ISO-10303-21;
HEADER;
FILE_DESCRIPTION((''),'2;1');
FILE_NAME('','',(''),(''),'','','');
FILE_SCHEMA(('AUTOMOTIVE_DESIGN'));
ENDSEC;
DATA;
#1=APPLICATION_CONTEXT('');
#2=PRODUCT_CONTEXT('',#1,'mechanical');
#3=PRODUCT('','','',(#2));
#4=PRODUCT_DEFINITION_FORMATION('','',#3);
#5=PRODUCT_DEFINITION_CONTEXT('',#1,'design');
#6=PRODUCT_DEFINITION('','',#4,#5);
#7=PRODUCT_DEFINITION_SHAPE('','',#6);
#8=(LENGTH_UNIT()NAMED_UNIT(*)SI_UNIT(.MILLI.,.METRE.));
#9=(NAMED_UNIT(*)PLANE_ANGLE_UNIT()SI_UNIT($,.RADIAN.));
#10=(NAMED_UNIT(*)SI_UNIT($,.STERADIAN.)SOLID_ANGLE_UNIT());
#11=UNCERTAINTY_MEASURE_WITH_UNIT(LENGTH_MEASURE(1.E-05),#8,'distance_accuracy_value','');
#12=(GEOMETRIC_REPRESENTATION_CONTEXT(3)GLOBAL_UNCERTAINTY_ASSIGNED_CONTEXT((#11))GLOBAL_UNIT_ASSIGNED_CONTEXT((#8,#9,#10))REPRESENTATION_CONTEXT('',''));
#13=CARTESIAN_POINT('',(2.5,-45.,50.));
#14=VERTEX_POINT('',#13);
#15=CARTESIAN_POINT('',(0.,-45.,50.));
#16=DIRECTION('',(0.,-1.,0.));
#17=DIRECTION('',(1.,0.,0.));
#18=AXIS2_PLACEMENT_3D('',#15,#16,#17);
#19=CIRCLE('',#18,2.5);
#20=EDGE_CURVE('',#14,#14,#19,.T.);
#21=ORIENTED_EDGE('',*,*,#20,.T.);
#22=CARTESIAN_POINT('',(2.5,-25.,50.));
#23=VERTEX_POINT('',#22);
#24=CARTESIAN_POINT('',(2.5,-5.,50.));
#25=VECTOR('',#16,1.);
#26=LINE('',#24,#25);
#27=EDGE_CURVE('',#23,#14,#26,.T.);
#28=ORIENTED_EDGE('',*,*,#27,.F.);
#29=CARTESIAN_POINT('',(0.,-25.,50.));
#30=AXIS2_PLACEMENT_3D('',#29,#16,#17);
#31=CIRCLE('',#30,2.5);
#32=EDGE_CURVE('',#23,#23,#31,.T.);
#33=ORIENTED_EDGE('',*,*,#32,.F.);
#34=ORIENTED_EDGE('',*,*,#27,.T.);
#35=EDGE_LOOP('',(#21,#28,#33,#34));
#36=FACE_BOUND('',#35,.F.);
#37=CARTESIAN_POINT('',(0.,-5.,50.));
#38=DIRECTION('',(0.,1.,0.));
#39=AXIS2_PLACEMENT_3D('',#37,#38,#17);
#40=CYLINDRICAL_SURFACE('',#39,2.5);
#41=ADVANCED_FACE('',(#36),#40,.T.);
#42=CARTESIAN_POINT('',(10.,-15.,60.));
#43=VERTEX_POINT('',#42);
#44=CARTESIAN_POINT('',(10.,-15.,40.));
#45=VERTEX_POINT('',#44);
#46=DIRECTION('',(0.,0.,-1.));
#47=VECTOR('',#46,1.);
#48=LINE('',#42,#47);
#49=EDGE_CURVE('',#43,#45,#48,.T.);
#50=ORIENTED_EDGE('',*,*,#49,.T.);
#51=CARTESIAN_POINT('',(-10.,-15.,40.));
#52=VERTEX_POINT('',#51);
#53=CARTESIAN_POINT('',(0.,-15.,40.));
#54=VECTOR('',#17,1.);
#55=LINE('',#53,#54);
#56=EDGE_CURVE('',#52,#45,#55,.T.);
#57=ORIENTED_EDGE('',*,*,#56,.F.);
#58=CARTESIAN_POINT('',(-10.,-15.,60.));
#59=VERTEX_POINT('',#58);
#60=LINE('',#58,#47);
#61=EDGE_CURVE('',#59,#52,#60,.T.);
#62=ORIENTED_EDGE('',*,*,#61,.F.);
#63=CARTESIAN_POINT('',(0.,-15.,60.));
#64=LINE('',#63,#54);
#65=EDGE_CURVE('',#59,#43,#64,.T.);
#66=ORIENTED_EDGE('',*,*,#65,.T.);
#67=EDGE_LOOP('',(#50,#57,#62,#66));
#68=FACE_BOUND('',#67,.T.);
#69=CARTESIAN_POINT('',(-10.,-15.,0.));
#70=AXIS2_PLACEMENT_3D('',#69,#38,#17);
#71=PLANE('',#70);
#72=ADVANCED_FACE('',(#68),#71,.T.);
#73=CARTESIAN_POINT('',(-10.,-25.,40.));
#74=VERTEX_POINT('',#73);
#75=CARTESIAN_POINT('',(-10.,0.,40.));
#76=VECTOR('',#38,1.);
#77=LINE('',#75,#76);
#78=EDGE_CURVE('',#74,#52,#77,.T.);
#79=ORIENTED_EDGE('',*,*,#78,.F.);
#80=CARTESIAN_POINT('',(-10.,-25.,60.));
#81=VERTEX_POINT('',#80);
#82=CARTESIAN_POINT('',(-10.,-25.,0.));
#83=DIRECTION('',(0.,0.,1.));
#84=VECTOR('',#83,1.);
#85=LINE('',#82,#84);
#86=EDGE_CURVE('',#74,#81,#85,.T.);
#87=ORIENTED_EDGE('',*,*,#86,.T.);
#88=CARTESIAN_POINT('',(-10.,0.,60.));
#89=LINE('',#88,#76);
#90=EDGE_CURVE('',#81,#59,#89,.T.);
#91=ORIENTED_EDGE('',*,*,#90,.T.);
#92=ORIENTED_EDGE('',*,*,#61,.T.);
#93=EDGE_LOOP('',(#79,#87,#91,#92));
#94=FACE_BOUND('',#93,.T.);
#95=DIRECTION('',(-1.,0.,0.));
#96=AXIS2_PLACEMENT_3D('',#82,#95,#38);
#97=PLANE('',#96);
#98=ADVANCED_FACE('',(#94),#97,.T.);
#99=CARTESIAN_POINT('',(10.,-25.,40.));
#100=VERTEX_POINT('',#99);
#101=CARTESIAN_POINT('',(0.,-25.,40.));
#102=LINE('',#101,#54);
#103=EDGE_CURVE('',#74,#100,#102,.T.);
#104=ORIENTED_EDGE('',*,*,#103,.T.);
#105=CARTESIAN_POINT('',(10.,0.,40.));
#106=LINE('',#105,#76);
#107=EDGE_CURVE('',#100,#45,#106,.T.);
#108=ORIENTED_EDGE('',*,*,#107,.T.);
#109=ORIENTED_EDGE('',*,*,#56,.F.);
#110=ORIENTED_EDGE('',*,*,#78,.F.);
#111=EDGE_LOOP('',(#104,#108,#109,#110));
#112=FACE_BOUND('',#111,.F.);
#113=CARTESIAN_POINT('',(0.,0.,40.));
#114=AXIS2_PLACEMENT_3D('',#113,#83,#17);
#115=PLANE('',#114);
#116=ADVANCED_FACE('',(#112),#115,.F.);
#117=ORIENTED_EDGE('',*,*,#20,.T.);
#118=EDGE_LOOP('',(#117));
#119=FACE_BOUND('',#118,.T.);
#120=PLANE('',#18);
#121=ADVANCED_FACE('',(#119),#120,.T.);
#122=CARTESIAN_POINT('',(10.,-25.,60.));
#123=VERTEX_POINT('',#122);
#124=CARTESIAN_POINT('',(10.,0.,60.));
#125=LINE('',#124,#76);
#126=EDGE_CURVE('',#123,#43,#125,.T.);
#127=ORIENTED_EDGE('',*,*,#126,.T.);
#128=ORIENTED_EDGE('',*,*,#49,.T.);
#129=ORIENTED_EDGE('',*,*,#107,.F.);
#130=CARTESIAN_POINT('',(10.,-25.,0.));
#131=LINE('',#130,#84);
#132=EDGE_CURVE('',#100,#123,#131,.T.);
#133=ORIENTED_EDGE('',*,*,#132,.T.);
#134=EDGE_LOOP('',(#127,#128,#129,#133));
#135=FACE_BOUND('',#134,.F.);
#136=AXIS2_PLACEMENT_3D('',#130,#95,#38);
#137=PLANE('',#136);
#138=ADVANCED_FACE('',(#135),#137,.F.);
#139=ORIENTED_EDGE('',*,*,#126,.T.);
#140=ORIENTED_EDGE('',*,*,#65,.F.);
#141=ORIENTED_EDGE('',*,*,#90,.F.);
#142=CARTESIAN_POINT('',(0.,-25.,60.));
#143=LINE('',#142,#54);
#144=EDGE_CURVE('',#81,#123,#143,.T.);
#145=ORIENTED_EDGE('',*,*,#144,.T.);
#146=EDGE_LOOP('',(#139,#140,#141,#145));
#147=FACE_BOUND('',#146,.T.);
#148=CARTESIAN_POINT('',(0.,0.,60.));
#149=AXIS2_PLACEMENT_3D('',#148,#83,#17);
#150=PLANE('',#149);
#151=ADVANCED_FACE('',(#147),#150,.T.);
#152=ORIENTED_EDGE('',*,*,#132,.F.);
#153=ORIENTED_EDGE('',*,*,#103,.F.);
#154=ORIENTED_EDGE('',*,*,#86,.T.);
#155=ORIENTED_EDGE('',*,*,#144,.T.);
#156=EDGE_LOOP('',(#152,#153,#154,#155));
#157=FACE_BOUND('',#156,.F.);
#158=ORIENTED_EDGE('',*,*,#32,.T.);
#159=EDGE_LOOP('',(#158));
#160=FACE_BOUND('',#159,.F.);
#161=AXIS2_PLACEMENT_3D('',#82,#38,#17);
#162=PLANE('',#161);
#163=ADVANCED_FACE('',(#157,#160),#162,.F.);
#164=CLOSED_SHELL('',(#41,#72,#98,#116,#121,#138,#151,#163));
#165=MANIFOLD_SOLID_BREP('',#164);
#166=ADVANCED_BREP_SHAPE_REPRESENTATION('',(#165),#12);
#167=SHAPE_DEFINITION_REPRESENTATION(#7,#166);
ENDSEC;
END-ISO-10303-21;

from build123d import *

# Parameters (mm, degrees)
F0_W     = 20
F0_H     = 50
F1_DEPTH = 60
F2_R     = 2.5
F3_DEPTH = 20
F4_DEPTH = 40
F5_DEPTH = 40
F6_DEPTH = 25
F7_DEPTH = 40
F8_DEPTH = 15


# Not quite as in the source:
# - a feature names something its author has since deleted; it is built from what else it names


with BuildPart() as f1:
    # F0 (on Top) → F1 (new body)
    with BuildSketch(Plane.XY):
        Rectangle(F0_W, F0_H)
    extrude(amount=F1_DEPTH)

    # F2 (on face) → F3 (cut)
    with BuildSketch(Plane.XZ.offset(25)):
        with Locations((0, 50)):
            Circle(F2_R)
    extrude(amount=-F3_DEPTH, mode=Mode.SUBTRACT)

    # F4 (add): a face of the model
    f4_faces = [f1.faces().sort_by_distance(p)[0] for p in [
        (0, 0, 0),
    ]]
    extrude(f4_faces, amount=-F4_DEPTH)

    # F5 (cut): a face of the model
    f5_faces = [f1.faces().sort_by_distance(p)[0] for p in [
        (0, 0, 0),
    ]]
    extrude(f5_faces, amount=-F5_DEPTH, mode=Mode.SUBTRACT)

    # F6 (cut): a face of the model
    f6_faces = [f1.faces().sort_by_distance(p)[0] for p in [
        (0, 25, 50),
    ]]
    extrude(f6_faces, amount=-F6_DEPTH, mode=Mode.SUBTRACT)

    # F7 (add): a face of the model
    f7_faces = [f1.faces().sort_by_distance(p)[0] for p in [
        (0, -5, 50),
    ]]
    extrude(f7_faces, amount=F7_DEPTH)

    # F8 (cut): a face of the model
    f8_faces = [f1.faces().sort_by_distance(p)[0] for p in [
        (0, 0, 50),
    ]]
    extrude(f8_faces, amount=-F8_DEPTH, mode=Mode.SUBTRACT)


solid = f1.part
